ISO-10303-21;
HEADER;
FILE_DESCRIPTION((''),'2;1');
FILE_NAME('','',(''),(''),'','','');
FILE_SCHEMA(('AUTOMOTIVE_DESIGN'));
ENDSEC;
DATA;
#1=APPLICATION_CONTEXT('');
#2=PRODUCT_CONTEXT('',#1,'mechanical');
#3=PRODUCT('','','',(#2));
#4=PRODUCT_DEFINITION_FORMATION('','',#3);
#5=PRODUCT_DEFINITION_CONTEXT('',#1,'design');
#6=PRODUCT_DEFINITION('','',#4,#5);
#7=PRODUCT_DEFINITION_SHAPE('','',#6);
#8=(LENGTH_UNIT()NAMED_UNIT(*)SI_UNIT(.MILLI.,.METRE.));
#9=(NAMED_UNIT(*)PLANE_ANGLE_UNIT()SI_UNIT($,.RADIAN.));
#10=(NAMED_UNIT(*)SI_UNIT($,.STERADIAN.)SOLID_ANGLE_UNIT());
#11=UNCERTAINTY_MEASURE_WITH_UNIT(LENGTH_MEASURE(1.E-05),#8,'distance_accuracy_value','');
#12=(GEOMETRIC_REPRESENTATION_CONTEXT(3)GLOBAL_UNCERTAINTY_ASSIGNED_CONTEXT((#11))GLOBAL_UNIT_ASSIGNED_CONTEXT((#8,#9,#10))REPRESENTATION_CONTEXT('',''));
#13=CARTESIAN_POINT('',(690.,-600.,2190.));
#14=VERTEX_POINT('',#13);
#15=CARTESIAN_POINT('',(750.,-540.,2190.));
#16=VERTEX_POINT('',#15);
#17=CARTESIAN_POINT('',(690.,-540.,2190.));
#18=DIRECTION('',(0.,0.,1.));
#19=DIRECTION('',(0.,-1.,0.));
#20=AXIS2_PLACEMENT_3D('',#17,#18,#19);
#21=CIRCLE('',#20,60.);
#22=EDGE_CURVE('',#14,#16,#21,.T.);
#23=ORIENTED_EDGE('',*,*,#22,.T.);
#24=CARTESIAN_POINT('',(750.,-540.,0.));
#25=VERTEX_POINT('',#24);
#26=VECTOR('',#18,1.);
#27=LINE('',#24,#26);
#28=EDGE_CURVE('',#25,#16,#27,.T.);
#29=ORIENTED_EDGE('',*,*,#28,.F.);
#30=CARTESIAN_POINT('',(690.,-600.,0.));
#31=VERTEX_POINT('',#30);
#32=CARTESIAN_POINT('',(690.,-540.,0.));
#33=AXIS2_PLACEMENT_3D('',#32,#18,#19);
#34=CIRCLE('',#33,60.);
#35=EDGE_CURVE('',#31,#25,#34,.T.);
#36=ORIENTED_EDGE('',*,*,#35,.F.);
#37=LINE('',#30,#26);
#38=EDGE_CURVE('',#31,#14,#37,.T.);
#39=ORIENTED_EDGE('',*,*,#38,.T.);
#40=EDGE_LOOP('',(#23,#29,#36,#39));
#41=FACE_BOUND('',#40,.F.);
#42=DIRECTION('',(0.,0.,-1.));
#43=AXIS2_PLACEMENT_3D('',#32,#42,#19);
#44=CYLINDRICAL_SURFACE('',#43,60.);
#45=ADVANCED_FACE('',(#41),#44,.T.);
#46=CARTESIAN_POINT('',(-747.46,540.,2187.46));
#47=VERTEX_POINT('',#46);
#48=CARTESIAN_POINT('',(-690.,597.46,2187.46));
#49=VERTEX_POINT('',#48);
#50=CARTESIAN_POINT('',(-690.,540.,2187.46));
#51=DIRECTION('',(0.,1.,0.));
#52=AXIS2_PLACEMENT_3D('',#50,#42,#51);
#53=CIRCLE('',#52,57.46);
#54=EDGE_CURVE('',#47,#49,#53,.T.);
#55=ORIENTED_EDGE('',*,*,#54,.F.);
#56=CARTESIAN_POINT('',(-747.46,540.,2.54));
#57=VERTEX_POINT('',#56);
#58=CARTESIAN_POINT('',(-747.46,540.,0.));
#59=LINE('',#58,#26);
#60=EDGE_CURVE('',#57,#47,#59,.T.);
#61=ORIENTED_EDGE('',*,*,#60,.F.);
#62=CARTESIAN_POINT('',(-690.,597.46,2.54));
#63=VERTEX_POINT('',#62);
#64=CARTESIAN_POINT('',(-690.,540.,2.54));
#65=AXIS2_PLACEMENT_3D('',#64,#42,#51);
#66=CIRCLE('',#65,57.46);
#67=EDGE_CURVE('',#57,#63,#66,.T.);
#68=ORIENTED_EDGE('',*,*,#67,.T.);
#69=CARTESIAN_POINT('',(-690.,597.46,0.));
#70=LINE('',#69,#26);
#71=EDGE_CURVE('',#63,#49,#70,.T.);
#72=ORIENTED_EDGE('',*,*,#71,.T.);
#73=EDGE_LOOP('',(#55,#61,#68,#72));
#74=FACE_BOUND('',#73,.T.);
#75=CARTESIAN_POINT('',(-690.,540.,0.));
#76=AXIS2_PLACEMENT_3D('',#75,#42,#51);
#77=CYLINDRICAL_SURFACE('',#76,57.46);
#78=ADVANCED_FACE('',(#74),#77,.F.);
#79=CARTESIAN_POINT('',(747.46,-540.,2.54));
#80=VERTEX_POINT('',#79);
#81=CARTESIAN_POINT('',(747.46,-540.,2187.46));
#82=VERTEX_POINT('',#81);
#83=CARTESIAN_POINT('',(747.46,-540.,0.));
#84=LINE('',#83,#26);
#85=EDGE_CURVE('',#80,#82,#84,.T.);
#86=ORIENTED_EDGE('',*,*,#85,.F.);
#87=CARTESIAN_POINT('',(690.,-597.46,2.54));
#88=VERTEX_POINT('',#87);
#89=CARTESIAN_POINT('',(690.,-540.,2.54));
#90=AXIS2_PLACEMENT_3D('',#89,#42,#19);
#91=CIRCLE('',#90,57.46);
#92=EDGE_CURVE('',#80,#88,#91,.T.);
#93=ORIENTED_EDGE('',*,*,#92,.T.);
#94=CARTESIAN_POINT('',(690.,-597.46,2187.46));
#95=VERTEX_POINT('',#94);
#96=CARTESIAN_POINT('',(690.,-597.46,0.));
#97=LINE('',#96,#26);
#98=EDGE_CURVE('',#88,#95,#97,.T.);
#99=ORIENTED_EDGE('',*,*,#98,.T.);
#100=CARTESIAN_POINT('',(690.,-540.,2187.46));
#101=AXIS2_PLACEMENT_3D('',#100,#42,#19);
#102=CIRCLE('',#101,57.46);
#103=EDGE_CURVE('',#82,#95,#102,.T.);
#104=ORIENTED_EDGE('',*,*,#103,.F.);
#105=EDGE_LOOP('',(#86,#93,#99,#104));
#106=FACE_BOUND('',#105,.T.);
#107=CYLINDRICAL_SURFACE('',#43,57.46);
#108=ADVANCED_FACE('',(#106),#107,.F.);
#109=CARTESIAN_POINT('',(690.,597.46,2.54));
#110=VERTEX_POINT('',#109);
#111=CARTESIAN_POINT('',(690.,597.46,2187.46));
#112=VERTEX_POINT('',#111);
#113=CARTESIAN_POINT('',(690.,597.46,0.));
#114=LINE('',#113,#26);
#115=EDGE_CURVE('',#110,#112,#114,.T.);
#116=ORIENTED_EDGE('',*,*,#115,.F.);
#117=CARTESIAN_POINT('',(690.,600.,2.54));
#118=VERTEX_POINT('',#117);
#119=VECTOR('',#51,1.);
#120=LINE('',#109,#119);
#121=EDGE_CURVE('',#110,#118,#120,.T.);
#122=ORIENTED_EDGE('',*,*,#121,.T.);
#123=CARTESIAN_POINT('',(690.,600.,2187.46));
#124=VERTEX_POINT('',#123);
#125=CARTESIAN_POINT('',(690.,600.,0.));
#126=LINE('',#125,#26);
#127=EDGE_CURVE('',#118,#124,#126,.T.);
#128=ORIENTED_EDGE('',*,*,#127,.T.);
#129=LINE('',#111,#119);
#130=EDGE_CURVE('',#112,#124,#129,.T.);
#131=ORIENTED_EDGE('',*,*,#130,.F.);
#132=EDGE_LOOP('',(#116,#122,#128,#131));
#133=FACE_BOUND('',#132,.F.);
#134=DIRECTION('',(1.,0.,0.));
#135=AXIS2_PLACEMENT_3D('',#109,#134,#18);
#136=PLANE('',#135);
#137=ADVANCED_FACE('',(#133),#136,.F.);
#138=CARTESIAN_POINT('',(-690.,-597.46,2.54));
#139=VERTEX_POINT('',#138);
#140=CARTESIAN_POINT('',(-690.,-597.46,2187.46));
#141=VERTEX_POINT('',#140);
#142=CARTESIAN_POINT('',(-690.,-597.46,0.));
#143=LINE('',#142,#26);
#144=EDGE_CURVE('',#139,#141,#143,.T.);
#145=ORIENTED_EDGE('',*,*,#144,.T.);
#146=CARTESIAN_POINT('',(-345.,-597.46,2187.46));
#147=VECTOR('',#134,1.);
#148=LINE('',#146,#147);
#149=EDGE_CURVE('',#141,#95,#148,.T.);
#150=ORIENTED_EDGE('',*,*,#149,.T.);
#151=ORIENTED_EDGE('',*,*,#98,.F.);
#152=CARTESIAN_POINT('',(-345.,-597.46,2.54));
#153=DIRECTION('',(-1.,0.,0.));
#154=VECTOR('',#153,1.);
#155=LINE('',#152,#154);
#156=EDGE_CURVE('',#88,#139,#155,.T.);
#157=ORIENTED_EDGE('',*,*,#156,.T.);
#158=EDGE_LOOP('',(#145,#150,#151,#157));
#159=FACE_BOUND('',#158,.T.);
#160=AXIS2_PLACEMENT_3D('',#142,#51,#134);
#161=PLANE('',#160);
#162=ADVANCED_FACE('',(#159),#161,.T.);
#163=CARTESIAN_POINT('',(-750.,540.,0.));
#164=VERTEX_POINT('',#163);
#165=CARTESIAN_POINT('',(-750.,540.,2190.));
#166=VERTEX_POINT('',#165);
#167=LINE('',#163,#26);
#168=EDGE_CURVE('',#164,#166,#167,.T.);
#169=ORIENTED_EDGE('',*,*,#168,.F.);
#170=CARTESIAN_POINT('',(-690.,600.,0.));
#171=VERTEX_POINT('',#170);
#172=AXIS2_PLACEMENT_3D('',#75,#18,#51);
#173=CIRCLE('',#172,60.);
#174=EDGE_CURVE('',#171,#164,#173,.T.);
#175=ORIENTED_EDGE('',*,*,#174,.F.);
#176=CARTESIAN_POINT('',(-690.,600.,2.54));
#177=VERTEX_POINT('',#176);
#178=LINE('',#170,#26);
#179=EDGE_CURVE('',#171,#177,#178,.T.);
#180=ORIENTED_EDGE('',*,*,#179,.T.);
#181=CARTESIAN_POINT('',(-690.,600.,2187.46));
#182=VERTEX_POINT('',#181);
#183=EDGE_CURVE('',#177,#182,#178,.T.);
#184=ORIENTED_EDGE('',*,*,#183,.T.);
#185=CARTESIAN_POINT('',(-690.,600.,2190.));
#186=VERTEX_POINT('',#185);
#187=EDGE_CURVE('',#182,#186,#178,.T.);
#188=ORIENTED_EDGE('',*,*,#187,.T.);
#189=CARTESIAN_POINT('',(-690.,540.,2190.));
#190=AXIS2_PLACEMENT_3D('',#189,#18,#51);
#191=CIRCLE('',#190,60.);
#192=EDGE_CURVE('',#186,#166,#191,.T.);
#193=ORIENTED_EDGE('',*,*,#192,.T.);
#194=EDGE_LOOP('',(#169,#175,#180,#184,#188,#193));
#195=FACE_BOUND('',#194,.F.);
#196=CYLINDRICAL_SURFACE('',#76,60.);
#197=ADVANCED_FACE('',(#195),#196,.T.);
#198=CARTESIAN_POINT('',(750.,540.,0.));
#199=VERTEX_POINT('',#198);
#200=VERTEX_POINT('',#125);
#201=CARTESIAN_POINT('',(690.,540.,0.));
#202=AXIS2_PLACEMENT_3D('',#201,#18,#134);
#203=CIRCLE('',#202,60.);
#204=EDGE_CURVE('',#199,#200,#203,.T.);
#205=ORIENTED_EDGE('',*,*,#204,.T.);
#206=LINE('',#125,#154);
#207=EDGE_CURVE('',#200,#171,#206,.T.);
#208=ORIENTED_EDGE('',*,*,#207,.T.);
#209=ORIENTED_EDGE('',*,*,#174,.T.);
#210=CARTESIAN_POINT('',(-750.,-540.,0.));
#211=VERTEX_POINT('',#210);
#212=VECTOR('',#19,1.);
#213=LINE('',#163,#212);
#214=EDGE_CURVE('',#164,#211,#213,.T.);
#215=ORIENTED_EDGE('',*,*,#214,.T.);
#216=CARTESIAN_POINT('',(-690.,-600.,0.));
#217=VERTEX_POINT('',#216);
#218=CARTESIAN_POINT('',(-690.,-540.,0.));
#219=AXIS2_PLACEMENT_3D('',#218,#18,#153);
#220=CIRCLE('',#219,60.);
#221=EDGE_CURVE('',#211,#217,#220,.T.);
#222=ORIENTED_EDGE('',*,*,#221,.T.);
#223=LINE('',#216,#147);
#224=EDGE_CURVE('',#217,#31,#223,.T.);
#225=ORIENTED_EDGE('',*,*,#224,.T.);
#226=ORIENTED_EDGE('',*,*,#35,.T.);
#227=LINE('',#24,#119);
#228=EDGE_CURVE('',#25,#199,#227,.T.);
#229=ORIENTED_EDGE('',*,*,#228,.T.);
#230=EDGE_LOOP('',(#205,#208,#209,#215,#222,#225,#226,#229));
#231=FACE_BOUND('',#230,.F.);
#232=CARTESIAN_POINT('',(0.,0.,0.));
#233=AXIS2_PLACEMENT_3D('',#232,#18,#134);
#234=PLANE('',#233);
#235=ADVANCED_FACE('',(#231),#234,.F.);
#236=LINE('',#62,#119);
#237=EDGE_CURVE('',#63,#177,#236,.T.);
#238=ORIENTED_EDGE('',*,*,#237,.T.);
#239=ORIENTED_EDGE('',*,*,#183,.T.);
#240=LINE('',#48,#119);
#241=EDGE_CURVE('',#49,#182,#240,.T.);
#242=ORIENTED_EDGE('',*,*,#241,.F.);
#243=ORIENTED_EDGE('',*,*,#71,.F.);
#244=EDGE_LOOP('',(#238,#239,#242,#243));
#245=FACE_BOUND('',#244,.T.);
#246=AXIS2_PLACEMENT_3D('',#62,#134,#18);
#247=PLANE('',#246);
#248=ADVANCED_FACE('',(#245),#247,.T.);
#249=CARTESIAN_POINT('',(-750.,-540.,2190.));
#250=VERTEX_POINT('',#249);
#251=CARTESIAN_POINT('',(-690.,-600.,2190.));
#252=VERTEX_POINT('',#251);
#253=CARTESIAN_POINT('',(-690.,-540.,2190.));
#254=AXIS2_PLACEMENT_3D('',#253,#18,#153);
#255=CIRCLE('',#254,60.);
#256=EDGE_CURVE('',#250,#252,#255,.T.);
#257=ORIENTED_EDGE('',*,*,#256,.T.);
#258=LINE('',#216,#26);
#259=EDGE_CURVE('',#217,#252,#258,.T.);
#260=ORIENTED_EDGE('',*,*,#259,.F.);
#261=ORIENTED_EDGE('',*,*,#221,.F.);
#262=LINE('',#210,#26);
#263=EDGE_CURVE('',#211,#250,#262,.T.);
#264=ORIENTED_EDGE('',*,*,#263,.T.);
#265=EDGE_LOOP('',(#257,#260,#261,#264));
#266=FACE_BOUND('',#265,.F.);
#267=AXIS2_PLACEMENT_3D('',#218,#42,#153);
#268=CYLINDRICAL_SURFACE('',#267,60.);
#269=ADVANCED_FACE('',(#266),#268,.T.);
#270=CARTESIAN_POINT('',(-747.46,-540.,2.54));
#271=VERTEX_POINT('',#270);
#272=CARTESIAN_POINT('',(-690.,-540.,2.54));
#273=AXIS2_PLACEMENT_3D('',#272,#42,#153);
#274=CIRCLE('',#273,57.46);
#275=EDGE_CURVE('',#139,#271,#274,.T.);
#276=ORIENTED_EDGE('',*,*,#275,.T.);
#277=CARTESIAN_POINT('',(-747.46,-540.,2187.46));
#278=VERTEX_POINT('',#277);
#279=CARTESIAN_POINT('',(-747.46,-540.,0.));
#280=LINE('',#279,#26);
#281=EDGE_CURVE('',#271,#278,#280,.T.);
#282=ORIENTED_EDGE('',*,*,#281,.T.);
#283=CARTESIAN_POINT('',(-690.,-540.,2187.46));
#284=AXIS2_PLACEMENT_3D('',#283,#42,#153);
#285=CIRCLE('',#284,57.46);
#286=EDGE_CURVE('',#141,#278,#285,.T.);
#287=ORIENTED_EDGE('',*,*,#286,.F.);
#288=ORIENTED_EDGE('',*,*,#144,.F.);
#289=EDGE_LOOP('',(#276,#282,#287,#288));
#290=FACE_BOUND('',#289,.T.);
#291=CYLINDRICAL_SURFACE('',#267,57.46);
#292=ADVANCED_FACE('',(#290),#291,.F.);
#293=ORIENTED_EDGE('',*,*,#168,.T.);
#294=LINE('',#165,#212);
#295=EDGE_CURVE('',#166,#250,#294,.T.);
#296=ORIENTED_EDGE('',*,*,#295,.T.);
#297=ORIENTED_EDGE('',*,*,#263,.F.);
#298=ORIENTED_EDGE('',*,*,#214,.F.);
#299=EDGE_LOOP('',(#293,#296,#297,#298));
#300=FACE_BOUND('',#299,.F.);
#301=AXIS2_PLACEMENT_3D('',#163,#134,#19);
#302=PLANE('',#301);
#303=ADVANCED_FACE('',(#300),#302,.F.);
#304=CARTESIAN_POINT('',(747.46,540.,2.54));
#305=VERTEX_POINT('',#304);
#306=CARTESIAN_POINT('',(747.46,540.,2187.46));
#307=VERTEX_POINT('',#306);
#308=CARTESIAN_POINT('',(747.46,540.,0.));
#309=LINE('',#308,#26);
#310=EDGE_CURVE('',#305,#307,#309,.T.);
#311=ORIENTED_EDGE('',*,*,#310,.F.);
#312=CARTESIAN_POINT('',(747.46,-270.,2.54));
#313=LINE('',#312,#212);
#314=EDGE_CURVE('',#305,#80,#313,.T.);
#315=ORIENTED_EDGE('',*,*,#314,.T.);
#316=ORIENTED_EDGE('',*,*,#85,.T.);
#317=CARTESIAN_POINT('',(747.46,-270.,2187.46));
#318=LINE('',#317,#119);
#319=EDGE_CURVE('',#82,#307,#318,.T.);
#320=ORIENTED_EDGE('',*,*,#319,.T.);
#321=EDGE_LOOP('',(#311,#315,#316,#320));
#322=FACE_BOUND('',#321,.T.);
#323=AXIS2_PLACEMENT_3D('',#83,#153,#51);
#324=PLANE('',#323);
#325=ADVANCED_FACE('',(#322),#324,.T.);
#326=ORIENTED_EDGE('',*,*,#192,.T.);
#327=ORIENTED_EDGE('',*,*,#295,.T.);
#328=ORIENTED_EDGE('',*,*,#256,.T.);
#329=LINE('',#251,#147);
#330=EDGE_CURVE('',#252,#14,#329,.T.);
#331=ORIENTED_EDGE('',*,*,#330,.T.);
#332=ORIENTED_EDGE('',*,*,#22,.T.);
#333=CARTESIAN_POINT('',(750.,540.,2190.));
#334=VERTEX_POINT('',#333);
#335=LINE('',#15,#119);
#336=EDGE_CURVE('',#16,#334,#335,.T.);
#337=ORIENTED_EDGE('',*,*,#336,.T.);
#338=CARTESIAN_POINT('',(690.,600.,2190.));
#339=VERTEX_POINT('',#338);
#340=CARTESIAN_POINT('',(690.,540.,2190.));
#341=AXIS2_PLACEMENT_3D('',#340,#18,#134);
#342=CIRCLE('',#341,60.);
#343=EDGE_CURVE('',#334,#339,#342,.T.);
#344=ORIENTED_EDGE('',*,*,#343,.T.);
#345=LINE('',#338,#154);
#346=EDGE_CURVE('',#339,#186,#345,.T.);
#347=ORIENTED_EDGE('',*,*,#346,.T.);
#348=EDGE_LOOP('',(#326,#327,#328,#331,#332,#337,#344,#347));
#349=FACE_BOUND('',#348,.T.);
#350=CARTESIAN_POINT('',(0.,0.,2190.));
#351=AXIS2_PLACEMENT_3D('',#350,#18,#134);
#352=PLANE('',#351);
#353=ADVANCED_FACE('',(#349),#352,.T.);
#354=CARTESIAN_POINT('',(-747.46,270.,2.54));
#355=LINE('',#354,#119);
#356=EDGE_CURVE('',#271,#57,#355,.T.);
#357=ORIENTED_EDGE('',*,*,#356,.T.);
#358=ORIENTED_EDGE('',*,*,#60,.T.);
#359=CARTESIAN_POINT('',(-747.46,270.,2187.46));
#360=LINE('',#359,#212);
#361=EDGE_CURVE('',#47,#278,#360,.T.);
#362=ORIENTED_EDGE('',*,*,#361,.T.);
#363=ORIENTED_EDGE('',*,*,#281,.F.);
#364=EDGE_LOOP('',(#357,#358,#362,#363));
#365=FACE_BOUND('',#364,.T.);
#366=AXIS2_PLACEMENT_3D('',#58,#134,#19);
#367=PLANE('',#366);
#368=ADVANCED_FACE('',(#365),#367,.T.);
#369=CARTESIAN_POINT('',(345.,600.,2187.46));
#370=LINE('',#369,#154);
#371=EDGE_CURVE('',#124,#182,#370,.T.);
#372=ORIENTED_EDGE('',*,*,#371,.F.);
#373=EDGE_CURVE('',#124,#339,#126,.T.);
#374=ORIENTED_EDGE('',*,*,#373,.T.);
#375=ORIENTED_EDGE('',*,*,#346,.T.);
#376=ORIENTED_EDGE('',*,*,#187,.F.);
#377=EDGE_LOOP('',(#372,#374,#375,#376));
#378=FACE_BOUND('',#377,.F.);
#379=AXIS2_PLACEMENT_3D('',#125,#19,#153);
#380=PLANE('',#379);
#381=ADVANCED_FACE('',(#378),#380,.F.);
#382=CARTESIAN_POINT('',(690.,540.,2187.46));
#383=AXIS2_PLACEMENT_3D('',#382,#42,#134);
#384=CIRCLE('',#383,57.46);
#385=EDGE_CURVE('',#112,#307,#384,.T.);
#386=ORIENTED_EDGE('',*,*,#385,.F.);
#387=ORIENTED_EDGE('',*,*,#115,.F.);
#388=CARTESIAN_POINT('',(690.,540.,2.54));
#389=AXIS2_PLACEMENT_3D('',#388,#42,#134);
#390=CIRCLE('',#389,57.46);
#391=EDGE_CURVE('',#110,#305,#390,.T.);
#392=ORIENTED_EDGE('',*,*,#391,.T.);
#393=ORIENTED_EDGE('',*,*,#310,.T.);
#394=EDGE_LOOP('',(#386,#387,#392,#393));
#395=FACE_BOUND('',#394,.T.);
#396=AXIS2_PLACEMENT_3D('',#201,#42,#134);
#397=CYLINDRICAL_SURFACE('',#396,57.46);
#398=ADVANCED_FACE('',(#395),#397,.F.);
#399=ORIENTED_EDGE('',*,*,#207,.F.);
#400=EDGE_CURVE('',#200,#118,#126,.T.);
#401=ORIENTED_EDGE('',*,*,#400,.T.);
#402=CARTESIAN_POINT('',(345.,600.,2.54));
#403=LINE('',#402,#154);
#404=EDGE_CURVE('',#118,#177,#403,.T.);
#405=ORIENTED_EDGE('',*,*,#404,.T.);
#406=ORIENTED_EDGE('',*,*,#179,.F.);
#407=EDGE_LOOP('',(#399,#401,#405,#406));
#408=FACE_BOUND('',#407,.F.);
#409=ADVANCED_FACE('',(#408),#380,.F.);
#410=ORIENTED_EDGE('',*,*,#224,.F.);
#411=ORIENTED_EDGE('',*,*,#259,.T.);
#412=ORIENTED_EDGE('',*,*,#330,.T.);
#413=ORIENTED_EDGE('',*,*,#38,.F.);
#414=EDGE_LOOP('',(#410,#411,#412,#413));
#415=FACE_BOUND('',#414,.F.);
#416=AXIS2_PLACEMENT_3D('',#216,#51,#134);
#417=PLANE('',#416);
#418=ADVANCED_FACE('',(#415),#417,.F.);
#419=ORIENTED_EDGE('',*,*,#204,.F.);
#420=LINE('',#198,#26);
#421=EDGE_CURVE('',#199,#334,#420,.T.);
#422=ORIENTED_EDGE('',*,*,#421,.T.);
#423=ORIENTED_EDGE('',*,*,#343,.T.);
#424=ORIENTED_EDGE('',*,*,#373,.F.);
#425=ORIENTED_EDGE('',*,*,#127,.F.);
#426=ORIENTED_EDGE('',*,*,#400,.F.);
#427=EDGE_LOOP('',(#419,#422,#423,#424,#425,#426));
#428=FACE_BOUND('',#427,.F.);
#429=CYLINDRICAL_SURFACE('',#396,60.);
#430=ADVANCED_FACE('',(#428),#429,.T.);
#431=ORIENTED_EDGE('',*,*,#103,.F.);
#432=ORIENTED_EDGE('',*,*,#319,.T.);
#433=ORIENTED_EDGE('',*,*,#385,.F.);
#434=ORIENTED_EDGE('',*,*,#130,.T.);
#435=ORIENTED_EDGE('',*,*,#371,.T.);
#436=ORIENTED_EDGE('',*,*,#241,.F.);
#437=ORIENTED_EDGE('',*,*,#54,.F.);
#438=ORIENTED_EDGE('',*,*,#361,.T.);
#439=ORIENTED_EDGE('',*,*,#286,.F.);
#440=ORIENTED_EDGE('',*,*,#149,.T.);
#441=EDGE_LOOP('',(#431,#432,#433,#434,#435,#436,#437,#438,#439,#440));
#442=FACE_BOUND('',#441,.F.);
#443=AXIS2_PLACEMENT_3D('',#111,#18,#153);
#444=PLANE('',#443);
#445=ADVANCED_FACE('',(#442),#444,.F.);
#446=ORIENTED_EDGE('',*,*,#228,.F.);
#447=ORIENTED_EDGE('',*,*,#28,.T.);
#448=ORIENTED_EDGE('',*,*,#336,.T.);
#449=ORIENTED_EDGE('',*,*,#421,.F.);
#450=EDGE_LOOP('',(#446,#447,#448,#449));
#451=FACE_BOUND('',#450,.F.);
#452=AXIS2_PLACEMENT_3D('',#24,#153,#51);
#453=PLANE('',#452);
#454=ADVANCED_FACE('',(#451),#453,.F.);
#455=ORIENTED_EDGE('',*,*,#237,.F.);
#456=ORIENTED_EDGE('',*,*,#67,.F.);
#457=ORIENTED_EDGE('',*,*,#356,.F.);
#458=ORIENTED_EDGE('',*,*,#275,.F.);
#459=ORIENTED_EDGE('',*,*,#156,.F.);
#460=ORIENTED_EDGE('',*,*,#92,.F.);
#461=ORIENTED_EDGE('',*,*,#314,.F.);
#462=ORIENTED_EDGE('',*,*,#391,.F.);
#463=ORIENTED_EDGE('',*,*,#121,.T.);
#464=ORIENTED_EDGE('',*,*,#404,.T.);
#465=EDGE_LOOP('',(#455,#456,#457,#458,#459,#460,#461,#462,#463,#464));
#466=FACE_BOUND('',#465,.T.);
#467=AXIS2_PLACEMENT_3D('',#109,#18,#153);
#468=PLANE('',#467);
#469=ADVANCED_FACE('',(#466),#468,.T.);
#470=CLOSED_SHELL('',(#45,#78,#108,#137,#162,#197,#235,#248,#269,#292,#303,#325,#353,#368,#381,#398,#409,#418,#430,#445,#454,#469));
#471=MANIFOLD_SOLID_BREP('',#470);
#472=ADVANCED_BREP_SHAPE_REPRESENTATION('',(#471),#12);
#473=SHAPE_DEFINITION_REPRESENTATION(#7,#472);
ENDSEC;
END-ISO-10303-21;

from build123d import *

# Parameters (mm, degrees)
F1_DEPTH = 2190
F2_T     = -2.54


# Not quite as in the source:
# - a shell that OpenCascade refuses in one call is made with other operations: the cavity is built on its own and cut out


with BuildPart() as f1:
    # F0 (on Top) → F1 (new body)
    with BuildSketch(Plane.XY):
        with BuildLine():
            Line((690, 600), (-690, 600))
            ThreePointArc((-690, 600), (-732.4264068712, 582.4264068712), (-750, 540))
            Line((-750, 540), (-750, -540))
            ThreePointArc((-750, -540), (-732.4264068712, -582.4264068712), (-690, -600))
            Line((-690, -600), (690, -600))
            ThreePointArc((690, -600), (732.4264068712, -582.4264068712), (750, -540))
            Line((750, -540), (750, 540))
            ThreePointArc((750, 540), (732.4264068712, 582.4264068712), (690, 600))
        make_face()
    extrude(amount=F1_DEPTH)

    # F2: a shell. OpenCascade refuses it in one call, so the cavity is built on its own and cut out:
    # the body offset inwards by the wall thickness, plus a prism from it out through each open face.
    f2_core = offset(f1.part, amount=F2_T, mode=Mode.PRIVATE)
    f2_exits = [f2_core.faces().sort_by_distance(p)[0] for p in [
        (0, 597.46, 1095),
    ]]
    add(f2_core, mode=Mode.SUBTRACT)
    extrude(f2_exits, amount=-F2_T, mode=Mode.SUBTRACT)


solid = f1.part
